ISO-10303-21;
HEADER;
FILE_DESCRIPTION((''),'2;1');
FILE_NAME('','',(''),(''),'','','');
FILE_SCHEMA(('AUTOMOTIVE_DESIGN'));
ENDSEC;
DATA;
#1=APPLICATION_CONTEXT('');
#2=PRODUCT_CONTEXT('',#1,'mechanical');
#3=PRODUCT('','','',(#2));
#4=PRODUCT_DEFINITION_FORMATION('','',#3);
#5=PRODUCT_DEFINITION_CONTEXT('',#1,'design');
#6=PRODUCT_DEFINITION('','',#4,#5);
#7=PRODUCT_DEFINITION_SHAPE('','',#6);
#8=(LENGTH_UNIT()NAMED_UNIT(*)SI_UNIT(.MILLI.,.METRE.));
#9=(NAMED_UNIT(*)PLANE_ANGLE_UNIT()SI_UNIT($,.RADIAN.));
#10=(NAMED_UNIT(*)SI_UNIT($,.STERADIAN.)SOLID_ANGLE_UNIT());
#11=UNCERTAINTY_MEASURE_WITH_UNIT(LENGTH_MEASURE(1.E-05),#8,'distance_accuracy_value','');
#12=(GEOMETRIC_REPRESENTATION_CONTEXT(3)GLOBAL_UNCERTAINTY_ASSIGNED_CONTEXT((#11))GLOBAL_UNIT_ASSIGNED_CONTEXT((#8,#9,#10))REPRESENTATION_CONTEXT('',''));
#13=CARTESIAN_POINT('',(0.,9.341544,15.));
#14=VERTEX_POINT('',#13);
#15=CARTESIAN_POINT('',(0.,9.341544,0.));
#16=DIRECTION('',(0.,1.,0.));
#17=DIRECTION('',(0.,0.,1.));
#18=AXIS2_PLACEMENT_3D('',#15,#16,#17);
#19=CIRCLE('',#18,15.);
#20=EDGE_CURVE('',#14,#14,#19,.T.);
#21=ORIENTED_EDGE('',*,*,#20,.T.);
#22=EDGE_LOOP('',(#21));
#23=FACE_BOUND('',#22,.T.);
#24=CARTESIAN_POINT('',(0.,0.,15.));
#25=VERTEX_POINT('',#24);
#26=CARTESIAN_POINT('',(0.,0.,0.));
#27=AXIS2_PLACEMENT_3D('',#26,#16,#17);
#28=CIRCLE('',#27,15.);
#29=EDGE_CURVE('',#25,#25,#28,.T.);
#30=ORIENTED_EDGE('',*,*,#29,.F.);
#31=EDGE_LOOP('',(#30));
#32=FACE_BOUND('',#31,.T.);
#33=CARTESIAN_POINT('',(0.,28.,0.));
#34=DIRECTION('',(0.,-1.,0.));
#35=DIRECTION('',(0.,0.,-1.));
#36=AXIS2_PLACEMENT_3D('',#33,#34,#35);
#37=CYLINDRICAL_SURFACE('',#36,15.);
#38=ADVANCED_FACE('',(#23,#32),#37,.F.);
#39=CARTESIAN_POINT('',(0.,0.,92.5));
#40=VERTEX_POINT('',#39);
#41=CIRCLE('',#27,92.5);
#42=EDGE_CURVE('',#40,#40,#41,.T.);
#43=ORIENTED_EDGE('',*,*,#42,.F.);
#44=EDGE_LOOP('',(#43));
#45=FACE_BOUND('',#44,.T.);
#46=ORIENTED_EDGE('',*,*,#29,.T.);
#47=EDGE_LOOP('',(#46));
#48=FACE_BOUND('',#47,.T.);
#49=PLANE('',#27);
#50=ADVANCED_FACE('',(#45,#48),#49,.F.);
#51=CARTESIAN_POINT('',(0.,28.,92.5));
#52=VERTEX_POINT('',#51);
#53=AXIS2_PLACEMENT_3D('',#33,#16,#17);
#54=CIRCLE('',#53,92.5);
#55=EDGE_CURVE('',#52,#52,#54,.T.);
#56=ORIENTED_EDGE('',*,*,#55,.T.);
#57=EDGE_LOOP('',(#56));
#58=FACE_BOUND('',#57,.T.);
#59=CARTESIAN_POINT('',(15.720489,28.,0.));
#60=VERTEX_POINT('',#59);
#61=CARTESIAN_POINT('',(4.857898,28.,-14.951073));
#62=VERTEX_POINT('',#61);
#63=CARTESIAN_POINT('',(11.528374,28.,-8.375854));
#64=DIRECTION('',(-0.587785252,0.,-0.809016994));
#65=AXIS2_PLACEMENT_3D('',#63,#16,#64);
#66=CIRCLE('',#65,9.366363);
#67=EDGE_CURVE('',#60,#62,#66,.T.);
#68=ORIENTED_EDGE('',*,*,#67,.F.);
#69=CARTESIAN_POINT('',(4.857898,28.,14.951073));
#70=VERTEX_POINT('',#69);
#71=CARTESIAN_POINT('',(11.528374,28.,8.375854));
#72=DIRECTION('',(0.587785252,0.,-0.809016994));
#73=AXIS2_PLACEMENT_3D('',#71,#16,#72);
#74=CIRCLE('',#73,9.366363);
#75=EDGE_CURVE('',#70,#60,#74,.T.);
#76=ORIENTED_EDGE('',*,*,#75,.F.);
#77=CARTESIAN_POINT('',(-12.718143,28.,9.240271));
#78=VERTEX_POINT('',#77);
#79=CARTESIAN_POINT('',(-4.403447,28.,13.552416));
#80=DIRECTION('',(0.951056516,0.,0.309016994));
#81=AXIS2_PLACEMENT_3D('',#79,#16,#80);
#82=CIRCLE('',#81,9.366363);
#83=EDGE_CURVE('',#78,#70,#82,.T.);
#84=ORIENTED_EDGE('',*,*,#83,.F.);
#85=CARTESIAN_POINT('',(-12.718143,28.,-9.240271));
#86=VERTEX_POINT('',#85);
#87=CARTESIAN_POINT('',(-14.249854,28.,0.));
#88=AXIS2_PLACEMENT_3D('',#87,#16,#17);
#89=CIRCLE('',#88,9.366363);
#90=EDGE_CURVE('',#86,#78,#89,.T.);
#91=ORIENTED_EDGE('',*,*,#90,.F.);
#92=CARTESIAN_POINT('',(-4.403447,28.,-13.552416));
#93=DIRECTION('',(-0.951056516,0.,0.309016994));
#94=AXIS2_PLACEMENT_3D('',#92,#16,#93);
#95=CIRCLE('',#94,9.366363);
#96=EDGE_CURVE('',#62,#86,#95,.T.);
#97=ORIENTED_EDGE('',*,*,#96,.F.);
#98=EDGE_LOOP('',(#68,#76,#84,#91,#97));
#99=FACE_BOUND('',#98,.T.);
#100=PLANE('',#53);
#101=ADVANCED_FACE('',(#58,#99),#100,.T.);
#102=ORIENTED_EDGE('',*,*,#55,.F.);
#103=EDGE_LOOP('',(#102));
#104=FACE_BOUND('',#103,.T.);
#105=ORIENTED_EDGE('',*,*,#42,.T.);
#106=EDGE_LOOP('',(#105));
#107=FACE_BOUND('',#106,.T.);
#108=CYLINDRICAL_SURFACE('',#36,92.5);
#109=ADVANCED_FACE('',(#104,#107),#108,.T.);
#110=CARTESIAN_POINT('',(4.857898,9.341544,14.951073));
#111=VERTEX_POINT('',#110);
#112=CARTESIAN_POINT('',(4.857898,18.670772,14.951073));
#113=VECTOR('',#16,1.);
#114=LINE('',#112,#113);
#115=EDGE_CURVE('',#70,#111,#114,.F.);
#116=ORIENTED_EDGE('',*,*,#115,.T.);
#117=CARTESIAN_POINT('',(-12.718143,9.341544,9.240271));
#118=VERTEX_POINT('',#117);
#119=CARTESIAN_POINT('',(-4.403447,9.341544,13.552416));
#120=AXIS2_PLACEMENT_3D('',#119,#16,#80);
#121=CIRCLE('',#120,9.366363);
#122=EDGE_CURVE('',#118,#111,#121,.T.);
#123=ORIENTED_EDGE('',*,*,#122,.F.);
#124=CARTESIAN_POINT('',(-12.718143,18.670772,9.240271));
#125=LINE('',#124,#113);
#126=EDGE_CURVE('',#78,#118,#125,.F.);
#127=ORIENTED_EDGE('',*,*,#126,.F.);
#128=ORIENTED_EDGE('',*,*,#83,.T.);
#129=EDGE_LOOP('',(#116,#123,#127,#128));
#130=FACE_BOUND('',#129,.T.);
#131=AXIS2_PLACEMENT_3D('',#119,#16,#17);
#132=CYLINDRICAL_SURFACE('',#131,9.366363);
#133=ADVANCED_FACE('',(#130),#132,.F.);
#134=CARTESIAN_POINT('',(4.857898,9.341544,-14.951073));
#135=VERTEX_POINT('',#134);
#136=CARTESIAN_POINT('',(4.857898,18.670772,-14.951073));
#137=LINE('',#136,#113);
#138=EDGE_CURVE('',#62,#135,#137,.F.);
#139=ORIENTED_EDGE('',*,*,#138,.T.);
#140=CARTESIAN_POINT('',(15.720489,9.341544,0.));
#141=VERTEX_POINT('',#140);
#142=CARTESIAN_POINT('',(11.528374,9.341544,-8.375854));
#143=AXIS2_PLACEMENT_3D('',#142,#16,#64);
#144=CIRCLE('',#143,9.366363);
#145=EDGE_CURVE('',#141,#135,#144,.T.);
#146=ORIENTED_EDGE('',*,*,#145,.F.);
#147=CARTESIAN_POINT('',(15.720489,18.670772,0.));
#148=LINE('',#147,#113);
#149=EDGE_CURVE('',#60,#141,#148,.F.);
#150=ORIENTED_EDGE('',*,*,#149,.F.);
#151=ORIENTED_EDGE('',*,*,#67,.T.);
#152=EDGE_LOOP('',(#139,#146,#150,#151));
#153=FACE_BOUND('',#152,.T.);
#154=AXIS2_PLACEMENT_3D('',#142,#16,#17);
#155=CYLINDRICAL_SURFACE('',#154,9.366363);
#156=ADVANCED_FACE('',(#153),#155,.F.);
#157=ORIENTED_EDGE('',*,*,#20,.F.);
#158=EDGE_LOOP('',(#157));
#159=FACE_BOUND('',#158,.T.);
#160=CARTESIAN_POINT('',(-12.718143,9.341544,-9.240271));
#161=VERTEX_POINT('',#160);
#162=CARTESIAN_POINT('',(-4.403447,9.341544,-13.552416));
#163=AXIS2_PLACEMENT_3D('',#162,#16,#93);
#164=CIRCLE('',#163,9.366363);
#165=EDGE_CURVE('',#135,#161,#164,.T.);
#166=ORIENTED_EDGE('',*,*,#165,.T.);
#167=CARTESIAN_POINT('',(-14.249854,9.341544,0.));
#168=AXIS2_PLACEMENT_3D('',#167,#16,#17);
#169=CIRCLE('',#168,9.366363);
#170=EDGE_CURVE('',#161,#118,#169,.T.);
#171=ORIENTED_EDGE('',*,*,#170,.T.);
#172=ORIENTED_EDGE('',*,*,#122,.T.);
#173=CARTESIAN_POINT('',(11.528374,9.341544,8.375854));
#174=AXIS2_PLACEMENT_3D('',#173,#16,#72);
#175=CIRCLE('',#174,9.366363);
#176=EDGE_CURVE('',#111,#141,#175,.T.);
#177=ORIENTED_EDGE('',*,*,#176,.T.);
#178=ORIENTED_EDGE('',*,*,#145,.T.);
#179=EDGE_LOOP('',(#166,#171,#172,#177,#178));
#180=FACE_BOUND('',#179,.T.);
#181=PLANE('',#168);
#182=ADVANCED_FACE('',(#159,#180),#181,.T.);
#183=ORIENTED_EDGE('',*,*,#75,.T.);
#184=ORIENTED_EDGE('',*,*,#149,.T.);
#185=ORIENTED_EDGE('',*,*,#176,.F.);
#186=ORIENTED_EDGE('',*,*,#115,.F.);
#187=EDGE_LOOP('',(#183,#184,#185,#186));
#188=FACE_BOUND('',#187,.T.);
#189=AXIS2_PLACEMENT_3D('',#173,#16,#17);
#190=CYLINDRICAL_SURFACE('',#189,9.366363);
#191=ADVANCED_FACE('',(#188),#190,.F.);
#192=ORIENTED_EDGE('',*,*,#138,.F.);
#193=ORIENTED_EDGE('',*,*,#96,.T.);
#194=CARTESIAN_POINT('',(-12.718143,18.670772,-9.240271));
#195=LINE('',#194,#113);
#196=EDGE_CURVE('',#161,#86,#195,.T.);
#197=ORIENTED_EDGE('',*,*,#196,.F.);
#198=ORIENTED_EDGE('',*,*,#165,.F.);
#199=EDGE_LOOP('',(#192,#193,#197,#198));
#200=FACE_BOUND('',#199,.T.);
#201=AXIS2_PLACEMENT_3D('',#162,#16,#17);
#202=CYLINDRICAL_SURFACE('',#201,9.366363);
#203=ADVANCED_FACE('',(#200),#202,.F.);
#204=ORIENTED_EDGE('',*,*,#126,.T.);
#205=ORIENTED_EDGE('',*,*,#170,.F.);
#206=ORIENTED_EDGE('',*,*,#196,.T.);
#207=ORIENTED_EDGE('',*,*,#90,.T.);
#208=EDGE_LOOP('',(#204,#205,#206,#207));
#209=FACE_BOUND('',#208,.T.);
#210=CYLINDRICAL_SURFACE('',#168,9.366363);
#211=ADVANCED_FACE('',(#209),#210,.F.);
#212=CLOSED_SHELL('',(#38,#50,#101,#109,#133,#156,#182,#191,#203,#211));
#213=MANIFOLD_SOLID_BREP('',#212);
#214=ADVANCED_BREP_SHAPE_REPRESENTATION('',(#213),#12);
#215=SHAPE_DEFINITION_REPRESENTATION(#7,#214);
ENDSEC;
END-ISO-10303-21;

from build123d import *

# Parameters (mm, degrees)
SKETCH1_R           = 92.5
BOSS_EXTRUDE1_DEPTH = 28
SKETCH2_R           = 15
CUT_EXTRUDE1_DEPTH  = 134.777800849
SKETCH3_R           = 9.366362932
CUT_EXTRUDE2_DEPTH  = 18.658456181
CIRPATTERN1_COUNT   = 5


with BuildPart() as part:
    # Sketch1 → Boss-Extrude1 (new body)
    with BuildSketch(Plane(origin=(0, 0, 0), x_dir=(1, 0, 0), z_dir=(0, 1, 0))):
        Circle(SKETCH1_R)
    extrude(amount=BOSS_EXTRUDE1_DEPTH)

    # Sketch2 → Cut-Extrude1 (cut, through all)
    with BuildSketch(Plane(origin=(0, 0, 0), x_dir=(1, 0, 0), z_dir=(0, 1, 0))):
        Circle(SKETCH2_R)
    extrude(amount=CUT_EXTRUDE1_DEPTH, mode=Mode.SUBTRACT)

    # Sketch3 → Cut-Extrude2 (cut)
    with BuildSketch(Plane(origin=(0, 28, 0), x_dir=(1, 0, 0), z_dir=(0, 1, 0))):
        with Locations((-14.249853525, 0)):
            Circle(SKETCH3_R)
    cut_extrude2 = extrude(amount=-CUT_EXTRUDE2_DEPTH, mode=Mode.SUBTRACT)

    # CirPattern1: Cut-Extrude2 ×5 about axis
    cirpattern1_axis = Axis((0, 0, 0), (0, 1, 0))
    for i in range(1, CIRPATTERN1_COUNT):
        add(cut_extrude2.rotate(cirpattern1_axis, i * 360 / CIRPATTERN1_COUNT), mode=Mode.SUBTRACT)


solid = part.part
